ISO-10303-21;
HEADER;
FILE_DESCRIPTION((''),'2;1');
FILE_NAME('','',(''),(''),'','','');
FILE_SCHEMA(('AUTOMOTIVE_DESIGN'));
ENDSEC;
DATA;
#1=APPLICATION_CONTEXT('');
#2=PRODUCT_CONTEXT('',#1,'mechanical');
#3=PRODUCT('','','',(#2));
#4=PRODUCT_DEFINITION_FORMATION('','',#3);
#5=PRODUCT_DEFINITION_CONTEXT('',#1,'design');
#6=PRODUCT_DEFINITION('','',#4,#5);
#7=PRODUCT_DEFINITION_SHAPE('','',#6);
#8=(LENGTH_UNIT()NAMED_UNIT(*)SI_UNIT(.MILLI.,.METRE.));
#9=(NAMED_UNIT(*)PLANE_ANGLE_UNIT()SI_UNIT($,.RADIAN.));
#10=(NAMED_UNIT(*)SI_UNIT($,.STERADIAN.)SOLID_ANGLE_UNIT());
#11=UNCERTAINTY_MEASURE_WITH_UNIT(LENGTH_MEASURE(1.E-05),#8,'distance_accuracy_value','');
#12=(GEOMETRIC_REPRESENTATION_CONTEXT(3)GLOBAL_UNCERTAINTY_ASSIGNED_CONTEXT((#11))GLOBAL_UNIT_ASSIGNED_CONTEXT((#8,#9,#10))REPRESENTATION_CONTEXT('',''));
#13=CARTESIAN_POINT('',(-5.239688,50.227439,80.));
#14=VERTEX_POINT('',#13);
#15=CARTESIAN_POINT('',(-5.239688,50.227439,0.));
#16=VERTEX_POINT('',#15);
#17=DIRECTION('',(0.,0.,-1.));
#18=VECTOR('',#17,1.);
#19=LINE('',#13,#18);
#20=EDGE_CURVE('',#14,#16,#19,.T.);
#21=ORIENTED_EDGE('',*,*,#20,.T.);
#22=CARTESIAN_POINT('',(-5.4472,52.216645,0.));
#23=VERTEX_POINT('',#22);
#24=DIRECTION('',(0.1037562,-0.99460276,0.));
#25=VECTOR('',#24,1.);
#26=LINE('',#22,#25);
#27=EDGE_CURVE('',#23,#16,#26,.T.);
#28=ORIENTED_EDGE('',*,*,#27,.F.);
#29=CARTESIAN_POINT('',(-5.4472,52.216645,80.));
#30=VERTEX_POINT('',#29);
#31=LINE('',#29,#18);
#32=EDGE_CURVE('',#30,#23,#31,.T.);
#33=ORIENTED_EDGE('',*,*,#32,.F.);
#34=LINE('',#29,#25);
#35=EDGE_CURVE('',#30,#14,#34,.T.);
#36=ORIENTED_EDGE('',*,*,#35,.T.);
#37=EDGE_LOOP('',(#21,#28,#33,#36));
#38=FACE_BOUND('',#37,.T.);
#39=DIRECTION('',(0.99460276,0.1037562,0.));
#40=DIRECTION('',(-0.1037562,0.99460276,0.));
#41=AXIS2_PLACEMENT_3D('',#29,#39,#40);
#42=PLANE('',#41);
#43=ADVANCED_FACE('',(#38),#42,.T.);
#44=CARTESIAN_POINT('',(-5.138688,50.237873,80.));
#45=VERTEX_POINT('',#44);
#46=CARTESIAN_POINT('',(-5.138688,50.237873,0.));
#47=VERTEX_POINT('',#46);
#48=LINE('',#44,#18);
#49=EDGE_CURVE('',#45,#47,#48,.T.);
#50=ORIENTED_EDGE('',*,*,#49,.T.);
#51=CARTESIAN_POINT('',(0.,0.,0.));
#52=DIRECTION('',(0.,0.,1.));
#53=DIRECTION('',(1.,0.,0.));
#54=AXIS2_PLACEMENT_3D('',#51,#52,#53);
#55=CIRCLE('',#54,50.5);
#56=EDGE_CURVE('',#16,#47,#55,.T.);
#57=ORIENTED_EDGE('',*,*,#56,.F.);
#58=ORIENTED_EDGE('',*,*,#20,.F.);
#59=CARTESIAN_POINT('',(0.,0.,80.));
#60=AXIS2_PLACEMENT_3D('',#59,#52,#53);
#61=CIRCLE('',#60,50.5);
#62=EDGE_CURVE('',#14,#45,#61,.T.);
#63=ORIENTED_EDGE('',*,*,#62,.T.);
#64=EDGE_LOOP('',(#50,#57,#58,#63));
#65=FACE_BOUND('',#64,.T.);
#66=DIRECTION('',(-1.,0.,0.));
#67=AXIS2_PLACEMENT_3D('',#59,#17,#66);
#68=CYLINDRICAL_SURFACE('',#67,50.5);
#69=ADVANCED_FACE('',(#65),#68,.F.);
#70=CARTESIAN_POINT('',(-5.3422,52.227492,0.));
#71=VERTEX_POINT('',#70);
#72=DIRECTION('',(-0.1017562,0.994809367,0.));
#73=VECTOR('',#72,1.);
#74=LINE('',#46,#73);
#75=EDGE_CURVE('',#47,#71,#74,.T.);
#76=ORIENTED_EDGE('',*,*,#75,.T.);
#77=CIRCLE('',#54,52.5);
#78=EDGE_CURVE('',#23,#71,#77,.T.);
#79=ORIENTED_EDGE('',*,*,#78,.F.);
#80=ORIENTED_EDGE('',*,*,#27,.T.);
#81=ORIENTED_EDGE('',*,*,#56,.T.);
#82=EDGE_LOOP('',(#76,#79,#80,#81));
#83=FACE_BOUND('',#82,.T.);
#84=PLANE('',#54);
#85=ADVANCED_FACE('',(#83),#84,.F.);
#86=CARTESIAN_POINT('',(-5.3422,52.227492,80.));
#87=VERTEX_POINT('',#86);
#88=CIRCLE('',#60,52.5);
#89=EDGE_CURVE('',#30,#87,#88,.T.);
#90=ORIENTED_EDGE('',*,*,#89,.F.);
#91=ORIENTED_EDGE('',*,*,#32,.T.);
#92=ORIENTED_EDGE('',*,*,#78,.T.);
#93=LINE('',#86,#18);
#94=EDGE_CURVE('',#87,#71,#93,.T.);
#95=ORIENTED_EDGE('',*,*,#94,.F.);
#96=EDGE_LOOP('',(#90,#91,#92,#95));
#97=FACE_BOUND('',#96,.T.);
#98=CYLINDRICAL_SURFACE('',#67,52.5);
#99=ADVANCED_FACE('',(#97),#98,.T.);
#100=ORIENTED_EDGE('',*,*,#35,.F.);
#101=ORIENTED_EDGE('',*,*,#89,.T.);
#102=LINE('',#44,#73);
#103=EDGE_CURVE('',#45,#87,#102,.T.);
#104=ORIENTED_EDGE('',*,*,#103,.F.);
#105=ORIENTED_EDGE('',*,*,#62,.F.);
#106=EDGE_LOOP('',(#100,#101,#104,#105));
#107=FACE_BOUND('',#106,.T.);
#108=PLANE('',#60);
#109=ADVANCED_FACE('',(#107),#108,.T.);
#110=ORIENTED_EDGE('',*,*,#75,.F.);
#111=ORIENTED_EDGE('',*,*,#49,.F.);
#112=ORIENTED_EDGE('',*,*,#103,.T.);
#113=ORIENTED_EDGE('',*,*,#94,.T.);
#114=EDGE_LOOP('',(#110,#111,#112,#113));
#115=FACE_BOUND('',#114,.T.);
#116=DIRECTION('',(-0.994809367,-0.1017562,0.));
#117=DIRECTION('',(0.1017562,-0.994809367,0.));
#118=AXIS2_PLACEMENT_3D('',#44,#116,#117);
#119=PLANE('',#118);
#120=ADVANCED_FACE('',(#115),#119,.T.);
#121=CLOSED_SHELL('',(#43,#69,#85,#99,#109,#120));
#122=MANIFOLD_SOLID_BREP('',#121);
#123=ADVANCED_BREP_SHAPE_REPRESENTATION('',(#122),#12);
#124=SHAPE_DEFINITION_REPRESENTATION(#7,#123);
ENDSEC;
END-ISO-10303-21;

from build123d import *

# Parameters (mm, degrees)
BASE_FLANGE1_DEPTH = 80


# Sheet-metal steps are written as plain solids
with BuildPart() as part:
    # Sketch1 → Base-Flange1 (new body)
    with BuildSketch(Plane.XY):
        with BuildLine():
            ThreePointArc((-5.239688099, 50.227439399), (5.189190721, -50.232681589), (-5.138688099, 50.237873011))
            Line((-5.138688099, 50.237873011), (-5.342200499, 52.227491744))
            ThreePointArc((-5.342200499, 52.227491744), (5.394703225, -52.222094722), (-5.447200499, 52.21664492))
            Line((-5.447200499, 52.21664492), (-5.239688099, 50.227439399))
        make_face()
    extrude(amount=BASE_FLANGE1_DEPTH)


solid = part.part
